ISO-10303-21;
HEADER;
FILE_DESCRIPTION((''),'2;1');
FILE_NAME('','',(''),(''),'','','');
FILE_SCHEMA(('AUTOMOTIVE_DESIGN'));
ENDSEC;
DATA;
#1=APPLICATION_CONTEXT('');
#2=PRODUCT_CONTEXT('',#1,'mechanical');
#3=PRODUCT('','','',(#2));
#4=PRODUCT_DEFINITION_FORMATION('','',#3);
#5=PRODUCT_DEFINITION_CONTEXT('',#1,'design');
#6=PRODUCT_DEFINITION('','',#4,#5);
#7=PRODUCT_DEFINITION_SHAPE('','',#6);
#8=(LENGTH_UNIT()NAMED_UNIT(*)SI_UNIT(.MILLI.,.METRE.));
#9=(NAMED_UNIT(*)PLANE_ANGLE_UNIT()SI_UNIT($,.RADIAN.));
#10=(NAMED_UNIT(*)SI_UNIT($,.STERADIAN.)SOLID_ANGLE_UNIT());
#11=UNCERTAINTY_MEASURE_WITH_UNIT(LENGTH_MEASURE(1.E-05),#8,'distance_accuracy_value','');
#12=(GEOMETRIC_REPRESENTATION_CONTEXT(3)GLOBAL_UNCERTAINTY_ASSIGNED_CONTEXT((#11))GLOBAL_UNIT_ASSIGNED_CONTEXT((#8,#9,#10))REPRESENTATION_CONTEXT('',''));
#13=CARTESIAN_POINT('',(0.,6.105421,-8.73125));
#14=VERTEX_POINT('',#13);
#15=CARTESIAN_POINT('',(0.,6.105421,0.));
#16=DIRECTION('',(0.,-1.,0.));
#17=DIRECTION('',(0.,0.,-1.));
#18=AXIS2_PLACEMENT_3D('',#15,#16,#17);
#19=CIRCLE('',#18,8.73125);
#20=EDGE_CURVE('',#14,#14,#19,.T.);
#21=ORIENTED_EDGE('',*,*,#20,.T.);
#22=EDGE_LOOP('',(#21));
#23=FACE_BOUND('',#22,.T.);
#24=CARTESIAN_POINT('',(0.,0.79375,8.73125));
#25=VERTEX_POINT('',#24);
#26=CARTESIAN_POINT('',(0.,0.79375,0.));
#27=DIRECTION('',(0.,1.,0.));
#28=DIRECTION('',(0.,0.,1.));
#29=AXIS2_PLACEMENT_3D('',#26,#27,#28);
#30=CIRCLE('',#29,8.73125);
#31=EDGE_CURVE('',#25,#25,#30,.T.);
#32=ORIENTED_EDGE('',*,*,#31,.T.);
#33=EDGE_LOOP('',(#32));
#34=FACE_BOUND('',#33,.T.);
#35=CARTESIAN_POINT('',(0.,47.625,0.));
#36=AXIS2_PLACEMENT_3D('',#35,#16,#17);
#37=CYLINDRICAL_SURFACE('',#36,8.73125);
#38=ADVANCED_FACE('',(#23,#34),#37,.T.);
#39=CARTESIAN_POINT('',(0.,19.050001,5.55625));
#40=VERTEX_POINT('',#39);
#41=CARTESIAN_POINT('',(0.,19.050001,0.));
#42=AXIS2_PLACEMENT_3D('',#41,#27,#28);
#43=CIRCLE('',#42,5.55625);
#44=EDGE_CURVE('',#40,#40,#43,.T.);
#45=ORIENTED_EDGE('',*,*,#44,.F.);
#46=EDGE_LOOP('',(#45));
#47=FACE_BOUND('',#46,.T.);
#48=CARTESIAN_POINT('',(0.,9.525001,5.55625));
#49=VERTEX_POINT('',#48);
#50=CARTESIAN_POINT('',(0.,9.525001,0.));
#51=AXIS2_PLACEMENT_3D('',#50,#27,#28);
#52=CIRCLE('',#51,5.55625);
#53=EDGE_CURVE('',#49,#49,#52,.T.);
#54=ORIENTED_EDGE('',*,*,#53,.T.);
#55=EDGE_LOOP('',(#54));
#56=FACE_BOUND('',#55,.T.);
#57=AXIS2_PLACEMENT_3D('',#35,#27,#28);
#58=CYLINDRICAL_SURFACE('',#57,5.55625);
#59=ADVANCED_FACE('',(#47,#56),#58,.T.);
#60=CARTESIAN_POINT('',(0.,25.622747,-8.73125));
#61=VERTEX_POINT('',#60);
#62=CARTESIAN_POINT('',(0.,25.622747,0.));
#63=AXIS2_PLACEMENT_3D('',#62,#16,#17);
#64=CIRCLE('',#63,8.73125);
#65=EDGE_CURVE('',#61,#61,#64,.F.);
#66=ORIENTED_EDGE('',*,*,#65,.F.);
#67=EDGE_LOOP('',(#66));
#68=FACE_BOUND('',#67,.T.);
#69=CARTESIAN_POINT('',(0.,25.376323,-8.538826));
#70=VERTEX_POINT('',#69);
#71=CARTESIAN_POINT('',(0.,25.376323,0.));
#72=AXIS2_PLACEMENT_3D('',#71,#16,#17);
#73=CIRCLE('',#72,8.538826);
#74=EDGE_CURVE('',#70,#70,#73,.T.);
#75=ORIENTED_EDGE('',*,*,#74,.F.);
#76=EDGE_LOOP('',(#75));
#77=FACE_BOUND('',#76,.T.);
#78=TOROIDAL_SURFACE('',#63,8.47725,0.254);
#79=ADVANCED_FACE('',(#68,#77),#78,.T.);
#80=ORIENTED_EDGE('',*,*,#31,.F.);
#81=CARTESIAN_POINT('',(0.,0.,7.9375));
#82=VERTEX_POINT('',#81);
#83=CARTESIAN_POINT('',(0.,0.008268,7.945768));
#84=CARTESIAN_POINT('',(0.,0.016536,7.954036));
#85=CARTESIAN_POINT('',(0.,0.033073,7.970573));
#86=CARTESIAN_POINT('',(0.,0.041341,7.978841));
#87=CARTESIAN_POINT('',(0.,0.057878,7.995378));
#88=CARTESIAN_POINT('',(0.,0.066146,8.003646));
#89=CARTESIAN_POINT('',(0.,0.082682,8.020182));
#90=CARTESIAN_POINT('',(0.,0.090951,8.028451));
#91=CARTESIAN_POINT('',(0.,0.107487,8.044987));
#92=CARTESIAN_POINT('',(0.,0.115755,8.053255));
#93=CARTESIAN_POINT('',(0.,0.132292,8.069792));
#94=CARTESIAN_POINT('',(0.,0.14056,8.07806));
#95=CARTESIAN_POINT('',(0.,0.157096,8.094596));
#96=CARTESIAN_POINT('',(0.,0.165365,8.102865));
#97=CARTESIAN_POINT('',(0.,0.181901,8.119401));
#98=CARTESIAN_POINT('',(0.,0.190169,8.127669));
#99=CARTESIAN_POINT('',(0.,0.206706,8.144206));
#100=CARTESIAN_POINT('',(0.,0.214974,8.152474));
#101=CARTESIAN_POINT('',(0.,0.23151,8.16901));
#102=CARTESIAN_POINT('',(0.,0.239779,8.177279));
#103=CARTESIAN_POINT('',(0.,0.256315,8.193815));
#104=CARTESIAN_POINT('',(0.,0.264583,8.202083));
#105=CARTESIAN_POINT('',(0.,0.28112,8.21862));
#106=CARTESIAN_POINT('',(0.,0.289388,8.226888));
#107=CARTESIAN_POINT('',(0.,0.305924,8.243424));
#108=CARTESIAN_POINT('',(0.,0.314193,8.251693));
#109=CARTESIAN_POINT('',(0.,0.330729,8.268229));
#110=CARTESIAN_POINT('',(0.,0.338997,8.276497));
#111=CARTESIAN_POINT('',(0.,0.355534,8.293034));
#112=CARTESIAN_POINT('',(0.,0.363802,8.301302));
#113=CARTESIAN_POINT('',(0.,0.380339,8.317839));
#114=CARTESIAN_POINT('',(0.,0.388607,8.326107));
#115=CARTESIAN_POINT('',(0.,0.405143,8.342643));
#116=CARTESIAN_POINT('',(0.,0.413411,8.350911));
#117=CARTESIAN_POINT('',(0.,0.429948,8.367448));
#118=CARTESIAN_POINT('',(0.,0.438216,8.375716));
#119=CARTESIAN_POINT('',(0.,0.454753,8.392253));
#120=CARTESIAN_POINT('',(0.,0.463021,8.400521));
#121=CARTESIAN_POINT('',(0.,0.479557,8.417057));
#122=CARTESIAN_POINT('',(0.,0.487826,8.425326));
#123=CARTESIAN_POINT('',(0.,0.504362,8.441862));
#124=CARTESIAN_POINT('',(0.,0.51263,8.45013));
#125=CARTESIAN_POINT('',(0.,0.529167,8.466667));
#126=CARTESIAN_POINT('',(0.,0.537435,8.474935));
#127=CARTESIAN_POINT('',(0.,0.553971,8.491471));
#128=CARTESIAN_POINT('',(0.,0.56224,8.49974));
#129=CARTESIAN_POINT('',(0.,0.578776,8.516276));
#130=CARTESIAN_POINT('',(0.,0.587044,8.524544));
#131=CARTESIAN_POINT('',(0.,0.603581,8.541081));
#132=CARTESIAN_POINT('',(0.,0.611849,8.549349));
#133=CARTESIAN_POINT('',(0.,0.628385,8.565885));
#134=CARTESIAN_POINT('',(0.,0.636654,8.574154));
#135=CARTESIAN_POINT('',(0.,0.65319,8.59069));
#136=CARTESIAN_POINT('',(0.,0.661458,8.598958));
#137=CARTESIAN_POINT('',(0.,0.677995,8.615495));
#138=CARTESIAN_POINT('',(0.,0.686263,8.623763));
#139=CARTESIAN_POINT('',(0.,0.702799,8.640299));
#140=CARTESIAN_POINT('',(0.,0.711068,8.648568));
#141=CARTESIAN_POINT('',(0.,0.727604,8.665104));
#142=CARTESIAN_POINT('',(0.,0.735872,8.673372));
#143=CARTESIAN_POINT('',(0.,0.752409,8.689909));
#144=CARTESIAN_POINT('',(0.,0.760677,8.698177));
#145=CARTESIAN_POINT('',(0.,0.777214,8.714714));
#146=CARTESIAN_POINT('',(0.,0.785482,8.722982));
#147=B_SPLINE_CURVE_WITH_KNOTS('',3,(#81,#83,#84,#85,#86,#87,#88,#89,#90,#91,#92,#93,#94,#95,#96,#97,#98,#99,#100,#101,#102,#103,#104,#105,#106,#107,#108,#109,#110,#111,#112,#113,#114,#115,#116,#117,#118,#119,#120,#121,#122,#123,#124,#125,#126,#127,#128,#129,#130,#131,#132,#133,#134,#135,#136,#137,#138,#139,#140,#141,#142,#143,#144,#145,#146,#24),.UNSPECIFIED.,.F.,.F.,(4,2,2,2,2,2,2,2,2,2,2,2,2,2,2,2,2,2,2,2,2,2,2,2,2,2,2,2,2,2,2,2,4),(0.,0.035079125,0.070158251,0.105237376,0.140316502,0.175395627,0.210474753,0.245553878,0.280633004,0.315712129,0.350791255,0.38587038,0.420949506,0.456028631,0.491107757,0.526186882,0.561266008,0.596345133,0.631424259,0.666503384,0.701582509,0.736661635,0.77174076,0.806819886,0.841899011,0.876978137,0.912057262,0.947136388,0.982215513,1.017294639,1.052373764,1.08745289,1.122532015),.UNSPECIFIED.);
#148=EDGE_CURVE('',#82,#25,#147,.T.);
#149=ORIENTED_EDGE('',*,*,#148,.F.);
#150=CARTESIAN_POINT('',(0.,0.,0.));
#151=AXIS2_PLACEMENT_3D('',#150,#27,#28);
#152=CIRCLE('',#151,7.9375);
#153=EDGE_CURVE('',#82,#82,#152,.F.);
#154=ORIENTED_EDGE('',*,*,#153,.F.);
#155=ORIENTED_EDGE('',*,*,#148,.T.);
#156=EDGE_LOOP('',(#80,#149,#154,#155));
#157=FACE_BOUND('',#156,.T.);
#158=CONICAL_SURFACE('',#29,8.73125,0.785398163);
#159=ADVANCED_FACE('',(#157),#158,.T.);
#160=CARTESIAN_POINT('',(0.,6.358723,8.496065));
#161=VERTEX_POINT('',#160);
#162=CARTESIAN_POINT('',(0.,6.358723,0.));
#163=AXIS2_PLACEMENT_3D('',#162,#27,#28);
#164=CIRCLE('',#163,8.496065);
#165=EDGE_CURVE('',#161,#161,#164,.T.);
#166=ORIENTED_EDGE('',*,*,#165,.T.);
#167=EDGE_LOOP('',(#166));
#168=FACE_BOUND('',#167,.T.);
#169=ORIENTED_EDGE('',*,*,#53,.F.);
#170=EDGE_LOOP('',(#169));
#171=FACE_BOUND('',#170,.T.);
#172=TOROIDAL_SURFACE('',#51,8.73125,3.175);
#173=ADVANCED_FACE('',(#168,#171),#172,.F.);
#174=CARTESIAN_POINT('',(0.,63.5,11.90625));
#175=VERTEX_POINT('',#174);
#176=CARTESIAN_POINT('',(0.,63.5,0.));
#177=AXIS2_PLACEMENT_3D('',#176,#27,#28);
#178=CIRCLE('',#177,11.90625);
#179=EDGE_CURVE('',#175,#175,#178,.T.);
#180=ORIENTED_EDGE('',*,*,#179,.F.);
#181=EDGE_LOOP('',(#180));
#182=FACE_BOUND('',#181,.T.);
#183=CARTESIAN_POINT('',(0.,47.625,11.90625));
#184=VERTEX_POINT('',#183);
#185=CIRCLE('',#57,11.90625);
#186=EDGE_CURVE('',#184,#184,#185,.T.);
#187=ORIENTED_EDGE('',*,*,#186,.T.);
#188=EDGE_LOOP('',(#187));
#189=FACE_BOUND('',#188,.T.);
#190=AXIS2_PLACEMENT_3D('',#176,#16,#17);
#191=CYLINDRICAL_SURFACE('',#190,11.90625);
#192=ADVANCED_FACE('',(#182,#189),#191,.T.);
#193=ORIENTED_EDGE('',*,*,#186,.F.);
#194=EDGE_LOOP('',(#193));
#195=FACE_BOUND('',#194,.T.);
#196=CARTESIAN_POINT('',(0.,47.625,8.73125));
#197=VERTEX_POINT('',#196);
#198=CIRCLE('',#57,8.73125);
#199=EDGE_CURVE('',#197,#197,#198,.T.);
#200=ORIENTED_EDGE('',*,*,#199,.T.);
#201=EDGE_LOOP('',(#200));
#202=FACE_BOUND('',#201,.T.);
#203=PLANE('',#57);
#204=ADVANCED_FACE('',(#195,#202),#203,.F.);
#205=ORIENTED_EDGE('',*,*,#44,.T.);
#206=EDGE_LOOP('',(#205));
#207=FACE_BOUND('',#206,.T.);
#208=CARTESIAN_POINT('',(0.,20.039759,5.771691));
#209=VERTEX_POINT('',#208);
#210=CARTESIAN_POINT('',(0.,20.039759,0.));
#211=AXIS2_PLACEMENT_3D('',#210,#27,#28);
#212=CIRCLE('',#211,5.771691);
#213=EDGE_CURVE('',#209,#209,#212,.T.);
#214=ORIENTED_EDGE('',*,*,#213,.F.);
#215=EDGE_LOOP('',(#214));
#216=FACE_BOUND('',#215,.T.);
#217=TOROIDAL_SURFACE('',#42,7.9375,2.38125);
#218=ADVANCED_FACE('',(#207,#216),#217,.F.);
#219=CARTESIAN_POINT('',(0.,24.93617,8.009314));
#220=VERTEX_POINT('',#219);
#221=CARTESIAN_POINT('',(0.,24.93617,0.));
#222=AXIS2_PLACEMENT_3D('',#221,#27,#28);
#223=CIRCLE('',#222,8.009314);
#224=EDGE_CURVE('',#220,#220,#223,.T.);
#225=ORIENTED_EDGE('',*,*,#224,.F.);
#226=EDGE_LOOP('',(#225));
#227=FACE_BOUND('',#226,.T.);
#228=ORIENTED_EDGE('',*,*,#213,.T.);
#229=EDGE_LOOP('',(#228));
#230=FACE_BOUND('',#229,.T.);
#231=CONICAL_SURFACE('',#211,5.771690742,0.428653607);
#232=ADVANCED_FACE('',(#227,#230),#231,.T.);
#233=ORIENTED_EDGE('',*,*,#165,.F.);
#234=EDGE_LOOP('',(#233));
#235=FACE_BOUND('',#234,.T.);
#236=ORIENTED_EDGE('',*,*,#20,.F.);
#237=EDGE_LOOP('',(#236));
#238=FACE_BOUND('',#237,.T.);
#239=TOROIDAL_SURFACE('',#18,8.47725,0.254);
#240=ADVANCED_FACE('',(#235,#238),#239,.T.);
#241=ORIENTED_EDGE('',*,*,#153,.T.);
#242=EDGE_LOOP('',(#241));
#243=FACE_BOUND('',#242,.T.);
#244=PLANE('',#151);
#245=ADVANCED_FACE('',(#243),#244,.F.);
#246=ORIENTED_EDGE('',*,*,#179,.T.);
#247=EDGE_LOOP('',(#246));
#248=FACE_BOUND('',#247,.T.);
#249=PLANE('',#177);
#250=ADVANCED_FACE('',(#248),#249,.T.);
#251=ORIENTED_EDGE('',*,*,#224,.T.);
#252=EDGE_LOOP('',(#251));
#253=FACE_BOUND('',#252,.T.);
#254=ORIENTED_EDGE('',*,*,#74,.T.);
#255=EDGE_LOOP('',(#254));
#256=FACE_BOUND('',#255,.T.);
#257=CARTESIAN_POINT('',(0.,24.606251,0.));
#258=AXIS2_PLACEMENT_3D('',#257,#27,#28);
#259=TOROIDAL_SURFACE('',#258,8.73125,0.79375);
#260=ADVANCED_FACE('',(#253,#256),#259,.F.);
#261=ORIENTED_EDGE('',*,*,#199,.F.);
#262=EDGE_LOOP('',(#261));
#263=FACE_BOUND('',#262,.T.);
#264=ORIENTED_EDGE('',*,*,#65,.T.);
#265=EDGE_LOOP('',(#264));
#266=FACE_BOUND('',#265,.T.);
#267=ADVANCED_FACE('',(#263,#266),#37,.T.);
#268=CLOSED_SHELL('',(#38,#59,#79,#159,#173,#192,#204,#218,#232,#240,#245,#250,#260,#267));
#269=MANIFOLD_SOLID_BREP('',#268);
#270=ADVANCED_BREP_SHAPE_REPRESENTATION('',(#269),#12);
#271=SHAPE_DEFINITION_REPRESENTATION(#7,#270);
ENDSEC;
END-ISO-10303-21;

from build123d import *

# Parameters (mm, degrees)
SKETCH1_R               = 8.73125
MAIN_DEPTH              = 47.625
CHAMFER1_SIZE           = 0.79375
FILLET1_R               = 0.254
SKETCH6_R               = 11.90625
SPRING_STABILIZER_DEPTH = 15.875


with BuildPart() as part:
    # Sketch1 → main (new body)
    with BuildSketch(Plane(origin=(0, 0, 0), x_dir=(1, 0, 0), z_dir=(0, 1, 0))):
        Circle(SKETCH1_R)
    extrude(amount=MAIN_DEPTH)

    # Chamfer1
    chamfer1_edges = [part.edges().sort_by_distance(p)[0] for p in [
        (-8.73125, 0, 0),
    ]]
    chamfer(chamfer1_edges, length=CHAMFER1_SIZE)

    # Sketch2 → ball_channel (revolve, cut)
    with BuildSketch(Plane(origin=(0, 0, 0), x_dir=(0, 0, -1), z_dir=(1, 0, 0))):
        with BuildLine():
            ThreePointArc((-8.009313581, 24.93617028), (-8.302201361, 25.274050408), (-8.73125, 25.400000791))
            Line((-8.73125, 25.400000791), (-8.73125, 6.350000791))
            ThreePointArc((-8.73125, 6.350000791), (-6.48618597, 7.279936761), (-5.55625, 9.525000791))
            Line((-5.55625, 9.525000791), (-5.55625, 19.050000791))
            ThreePointArc((-5.55625, 19.050000791), (-5.610733482, 19.556468098), (-5.771690742, 20.039759257))
            Line((-5.771690742, 20.039759257), (-8.009313581, 24.93617028))
        make_face()
    revolve(axis=Axis((0, 47.625, 0), (0, -1, 0)), mode=Mode.SUBTRACT)

    # Fillet1
    fillet1_edges = [part.edges().sort_by_distance(p)[0] for p in [
        (-6.173926083, 25.400000791, -6.173926083),
        (6.173926083, 6.350000791, 6.173926083),
    ]]
    fillet(fillet1_edges, radius=FILLET1_R)

    # Sketch6 → spring_stabilizer (add)
    with BuildSketch(Plane(origin=(0, 47.625, 0), x_dir=(1, 0, 0), z_dir=(0, 1, 0))):
        Circle(SKETCH6_R)
    extrude(amount=SPRING_STABILIZER_DEPTH)


solid = part.part
